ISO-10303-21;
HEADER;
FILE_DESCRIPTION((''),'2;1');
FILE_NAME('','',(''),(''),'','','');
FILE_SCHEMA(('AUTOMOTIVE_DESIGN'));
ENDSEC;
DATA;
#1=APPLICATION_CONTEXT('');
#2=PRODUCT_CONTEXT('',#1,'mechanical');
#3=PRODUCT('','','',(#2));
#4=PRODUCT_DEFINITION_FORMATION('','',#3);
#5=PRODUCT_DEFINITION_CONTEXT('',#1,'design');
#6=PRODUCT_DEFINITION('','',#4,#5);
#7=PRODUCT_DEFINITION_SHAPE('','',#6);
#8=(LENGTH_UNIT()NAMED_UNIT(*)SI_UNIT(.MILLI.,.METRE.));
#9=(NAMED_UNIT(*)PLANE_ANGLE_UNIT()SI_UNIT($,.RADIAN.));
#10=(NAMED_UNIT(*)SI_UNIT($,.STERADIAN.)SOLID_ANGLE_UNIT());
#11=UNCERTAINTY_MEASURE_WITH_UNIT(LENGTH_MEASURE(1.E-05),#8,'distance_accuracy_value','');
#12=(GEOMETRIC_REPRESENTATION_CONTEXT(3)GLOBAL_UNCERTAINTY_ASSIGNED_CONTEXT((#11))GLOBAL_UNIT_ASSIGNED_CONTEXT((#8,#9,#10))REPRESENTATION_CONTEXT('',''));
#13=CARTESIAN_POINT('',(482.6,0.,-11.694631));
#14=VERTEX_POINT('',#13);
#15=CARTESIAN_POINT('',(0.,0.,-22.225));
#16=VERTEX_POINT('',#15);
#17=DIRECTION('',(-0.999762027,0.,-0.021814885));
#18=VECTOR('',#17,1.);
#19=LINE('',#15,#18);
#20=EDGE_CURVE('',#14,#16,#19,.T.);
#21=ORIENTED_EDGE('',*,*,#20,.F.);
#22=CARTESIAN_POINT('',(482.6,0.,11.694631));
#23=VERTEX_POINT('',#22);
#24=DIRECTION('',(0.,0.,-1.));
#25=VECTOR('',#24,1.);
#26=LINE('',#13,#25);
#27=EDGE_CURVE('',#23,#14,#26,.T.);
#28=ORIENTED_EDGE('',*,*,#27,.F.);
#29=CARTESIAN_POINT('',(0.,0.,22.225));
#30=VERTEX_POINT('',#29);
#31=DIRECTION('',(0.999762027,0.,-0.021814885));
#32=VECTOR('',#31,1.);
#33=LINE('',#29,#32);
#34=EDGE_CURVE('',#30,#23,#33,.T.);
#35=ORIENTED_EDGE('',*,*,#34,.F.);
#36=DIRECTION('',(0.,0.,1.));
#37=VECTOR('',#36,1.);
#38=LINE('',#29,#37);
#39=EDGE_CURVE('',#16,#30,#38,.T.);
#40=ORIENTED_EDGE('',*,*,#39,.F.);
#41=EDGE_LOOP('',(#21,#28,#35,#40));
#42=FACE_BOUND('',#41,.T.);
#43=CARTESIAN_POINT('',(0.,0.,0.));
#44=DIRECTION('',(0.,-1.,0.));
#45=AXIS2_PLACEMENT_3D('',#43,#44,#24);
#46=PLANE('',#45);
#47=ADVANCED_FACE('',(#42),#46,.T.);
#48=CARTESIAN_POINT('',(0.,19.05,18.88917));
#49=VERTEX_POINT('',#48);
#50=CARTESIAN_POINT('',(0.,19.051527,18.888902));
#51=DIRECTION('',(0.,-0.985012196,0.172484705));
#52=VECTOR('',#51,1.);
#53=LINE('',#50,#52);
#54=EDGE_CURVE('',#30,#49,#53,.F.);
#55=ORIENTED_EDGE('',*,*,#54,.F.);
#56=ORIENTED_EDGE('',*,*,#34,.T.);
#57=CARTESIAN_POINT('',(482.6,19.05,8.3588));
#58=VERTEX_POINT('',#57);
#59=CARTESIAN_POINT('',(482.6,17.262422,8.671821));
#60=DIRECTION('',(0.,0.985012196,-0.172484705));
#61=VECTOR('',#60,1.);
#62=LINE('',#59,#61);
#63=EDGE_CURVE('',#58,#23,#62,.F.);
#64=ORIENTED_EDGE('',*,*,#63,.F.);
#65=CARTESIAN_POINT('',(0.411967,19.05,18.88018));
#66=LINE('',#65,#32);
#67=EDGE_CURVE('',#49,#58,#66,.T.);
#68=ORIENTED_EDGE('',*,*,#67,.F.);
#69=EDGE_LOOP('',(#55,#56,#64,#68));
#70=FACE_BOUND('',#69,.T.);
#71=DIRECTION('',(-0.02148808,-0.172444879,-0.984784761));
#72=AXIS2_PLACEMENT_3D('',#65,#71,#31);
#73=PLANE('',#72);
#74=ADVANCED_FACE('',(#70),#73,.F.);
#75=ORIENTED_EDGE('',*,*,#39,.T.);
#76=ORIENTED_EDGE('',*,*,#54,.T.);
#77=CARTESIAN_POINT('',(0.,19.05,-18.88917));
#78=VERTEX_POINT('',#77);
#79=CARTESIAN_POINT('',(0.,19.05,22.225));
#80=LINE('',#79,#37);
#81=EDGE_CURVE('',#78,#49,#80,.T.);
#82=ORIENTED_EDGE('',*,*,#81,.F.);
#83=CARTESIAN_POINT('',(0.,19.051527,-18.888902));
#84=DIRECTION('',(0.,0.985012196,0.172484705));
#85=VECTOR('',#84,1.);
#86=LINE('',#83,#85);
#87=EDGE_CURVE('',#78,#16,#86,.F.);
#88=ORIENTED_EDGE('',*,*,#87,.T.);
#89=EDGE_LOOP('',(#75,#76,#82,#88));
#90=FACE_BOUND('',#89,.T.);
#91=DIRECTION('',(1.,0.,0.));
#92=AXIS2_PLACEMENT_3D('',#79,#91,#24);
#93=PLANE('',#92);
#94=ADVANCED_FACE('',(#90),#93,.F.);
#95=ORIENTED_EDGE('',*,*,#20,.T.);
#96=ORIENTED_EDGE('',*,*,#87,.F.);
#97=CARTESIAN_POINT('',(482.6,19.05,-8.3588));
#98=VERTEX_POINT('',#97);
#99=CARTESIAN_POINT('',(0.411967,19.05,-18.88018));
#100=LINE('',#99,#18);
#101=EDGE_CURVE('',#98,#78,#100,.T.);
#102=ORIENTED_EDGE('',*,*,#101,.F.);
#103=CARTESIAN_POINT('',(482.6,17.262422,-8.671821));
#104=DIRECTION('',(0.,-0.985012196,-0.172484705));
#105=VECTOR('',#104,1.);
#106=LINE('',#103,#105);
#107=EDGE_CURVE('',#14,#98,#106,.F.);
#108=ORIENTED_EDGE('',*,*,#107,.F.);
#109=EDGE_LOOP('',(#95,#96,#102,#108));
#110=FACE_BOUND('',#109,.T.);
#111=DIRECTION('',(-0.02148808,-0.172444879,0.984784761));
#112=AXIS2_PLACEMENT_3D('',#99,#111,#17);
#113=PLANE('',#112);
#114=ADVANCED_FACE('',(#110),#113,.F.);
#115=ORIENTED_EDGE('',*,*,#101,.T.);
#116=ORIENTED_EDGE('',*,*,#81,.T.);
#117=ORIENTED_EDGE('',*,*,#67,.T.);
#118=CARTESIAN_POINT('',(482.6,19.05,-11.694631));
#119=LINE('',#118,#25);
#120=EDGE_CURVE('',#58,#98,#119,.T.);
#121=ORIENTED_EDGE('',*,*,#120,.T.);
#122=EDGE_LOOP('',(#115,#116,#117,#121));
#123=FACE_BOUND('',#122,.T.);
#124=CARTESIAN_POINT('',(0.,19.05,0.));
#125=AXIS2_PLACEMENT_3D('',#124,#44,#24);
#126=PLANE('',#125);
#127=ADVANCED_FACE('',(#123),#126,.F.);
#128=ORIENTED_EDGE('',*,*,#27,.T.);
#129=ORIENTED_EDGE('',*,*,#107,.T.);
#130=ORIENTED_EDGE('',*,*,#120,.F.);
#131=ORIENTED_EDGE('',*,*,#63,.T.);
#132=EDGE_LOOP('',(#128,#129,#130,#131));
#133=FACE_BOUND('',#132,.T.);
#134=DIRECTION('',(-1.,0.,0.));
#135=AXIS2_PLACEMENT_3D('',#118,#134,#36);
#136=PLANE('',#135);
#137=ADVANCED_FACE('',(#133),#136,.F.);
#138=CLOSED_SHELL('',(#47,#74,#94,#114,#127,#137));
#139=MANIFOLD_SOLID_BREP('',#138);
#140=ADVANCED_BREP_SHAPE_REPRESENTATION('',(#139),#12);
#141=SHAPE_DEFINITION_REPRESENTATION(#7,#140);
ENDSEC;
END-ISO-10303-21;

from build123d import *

# Parameters (mm, degrees)
BOSS_EXTRUDE1_DEPTH = 19.05
CHAMFER1_SIZE       = 19.05
CHAMFER1_SIZE_2     = 3.335036558


with BuildPart() as part:
    # Sketch1 → Boss-Extrude1 (new body)
    with BuildSketch(Plane(origin=(0, 0, 0), x_dir=(1, 0, 0), z_dir=(0, 1, 0))):
        Polygon((0, -22.225), (0, 22.225), (482.6, 11.69463054), (482.6, -11.69463054), align=None)
    extrude(amount=BOSS_EXTRUDE1_DEPTH)

    # Chamfer1
    # the kernel refuses this chamfer: 19.05, 3.335036558 mm, written as the material it takes off along each edge
    with BuildSketch(Plane(origin=(532.090771279, 19.05, 10.614738069), x_dir=(0.00014476735017107792, -0.9999779803617965, 0.006634593729589879), z_dir=(-0.9997620270799091, 0, 0.021814885034561207)), Plane(origin=(-49.490771279, 19.05, -23.304892471), x_dir=(0.00014476735017107596, -0.9999779803617965, -0.00663459372958979), z_dir=(0.9997620270799091, 0, 0.021814885034561207))) as chamfer1_piece_1:
        Polygon((CHAMFER1_SIZE * 0.999977980362, -CHAMFER1_SIZE * 0.00663617295905), (-CHAMFER1_SIZE_2 * 0.00663617295888, -CHAMFER1_SIZE_2 * 0.999977980336), (0, 0), align=None)
    extrude(amount=581.719976159, mode=Mode.SUBTRACT)


solid = part.part
